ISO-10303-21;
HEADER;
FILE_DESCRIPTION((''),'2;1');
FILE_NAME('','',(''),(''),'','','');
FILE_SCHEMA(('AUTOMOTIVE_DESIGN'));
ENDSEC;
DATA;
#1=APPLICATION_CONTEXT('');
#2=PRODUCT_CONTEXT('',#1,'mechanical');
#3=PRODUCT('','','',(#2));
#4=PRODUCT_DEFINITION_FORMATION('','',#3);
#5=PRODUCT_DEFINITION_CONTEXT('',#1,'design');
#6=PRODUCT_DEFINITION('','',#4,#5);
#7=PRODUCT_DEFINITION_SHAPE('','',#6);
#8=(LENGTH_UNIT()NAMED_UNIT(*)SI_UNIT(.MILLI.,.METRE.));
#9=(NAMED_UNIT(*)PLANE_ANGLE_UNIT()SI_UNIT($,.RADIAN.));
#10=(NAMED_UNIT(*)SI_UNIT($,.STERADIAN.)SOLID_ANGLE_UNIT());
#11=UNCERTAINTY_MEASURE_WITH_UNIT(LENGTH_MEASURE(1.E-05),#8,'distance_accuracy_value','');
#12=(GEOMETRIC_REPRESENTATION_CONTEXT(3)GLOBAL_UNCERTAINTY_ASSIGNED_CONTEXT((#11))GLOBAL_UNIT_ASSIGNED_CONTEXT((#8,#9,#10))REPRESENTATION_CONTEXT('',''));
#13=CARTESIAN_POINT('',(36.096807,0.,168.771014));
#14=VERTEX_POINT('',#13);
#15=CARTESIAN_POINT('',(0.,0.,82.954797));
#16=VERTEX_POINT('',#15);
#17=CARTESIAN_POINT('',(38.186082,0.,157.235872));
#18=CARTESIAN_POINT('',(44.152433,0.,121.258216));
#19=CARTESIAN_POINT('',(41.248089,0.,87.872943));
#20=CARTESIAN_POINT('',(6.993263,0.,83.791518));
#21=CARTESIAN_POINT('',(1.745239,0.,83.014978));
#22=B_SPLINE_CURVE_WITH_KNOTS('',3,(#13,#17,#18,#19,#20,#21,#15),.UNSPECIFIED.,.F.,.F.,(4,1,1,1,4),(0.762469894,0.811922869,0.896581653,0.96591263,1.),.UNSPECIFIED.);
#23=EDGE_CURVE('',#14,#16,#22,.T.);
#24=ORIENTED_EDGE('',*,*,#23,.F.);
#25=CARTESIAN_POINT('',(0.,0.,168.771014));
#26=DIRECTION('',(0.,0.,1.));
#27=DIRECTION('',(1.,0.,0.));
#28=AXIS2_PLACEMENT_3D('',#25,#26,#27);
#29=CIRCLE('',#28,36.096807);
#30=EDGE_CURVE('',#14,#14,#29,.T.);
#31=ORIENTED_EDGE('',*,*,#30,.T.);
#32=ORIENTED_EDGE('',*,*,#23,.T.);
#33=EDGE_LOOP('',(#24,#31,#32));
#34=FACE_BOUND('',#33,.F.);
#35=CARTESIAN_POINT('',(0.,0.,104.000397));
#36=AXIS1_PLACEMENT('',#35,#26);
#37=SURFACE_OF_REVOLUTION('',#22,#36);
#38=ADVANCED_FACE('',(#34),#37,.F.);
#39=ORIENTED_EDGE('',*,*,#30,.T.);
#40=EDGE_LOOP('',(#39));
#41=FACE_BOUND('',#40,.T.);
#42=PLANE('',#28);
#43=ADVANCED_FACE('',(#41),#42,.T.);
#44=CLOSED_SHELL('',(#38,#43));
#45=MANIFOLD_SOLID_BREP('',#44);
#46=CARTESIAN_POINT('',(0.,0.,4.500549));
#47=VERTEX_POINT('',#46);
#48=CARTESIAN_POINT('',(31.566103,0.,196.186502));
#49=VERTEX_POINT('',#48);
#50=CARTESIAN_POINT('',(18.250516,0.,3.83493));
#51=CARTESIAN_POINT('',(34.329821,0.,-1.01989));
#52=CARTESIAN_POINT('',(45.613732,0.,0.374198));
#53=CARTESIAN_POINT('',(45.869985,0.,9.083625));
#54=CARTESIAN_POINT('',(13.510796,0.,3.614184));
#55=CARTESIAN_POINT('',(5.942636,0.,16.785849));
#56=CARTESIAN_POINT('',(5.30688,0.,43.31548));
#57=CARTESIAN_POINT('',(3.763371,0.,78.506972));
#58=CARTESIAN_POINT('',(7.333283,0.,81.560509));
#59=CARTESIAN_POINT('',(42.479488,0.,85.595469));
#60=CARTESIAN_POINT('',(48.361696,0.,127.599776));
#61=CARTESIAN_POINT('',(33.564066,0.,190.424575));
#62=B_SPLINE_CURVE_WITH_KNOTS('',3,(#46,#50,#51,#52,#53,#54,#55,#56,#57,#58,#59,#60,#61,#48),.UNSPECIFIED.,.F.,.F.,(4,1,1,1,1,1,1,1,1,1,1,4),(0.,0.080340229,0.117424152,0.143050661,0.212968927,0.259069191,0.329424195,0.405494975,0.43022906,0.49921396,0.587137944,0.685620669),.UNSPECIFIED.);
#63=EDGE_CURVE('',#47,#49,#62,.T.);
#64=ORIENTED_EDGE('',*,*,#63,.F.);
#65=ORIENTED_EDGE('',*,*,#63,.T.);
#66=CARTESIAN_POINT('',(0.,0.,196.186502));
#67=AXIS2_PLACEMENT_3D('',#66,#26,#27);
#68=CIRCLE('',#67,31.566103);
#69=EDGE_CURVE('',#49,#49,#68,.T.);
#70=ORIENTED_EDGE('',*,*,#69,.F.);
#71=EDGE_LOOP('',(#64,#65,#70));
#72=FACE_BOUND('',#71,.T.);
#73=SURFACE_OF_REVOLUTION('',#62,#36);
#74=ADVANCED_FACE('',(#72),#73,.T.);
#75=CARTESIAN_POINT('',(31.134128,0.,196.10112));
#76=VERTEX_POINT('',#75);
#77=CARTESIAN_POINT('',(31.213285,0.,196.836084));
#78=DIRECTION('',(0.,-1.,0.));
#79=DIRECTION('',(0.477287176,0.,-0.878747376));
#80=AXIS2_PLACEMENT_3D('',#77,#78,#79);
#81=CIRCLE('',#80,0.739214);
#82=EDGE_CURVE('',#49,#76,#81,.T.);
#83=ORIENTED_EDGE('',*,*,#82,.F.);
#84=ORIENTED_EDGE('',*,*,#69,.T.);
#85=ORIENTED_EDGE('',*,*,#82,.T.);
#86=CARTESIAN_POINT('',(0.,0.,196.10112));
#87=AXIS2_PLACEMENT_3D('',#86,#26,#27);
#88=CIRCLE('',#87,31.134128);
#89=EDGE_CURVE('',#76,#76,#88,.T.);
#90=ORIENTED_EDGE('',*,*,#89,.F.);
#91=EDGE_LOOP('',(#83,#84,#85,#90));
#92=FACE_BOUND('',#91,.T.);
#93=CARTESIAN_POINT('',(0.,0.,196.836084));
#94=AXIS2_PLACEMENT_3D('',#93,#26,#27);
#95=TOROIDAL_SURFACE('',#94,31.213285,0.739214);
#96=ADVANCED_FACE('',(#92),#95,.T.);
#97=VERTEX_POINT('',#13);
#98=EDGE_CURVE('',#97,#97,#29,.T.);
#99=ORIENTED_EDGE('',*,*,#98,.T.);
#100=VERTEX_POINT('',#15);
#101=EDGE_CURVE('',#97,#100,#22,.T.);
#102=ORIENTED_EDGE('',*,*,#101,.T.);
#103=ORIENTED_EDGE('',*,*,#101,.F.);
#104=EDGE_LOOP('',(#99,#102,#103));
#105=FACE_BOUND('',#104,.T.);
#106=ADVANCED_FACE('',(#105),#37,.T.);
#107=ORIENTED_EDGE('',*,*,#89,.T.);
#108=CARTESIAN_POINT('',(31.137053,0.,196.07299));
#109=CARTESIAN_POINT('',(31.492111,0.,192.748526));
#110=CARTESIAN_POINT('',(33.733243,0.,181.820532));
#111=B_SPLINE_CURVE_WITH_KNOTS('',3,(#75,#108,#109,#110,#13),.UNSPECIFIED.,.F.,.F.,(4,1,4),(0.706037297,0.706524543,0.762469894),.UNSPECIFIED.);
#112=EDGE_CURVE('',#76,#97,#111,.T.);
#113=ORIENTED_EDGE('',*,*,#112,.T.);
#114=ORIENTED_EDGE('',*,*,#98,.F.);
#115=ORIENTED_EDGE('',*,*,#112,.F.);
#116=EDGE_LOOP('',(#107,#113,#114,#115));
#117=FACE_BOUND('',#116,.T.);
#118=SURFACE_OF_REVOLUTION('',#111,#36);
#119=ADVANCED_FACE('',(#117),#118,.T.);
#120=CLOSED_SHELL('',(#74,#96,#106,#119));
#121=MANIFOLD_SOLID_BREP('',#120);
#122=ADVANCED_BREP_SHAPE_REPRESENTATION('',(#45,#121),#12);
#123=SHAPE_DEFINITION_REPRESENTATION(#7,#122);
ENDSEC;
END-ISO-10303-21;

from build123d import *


with BuildPart() as f1:
    # F0 (on Front) → F1 (revolve)
    with BuildSketch(Plane.XZ):
        with BuildLine():
            Line((0, 82.9547974361), (0, 4.5005489468))
            add(Edge.make_bspline(
                [(0, 4.5005489468), (18.2505162347, 3.834930338), (34.3298208435, -1.0198899315), (45.6137322951, 0.3741983137), (45.869984667, 9.0836251174), (13.51079595, 3.614184281), (5.9426358502, 16.785848861), (5.3068801774, 43.3154798774), (3.7633712803, 78.5069717888), (7.333282914, 81.5605086481), (42.4794878758, 85.5954689569), (48.3616963183, 127.5997756572), (33.5640664678, 190.4245748965), (31.5661028946, 196.1865015243)],
                knots=[0, 0, 0, 0, 0.0803402286, 0.1174241523, 0.1430506609, 0.2129689271, 0.2590691911, 0.3294241952, 0.4054949752, 0.4302290595, 0.4992139601, 0.5871379444, 0.6856206692, 0.6856206692, 0.6856206692, 0.6856206692], degree=3))
            add(Edge.make_bspline(
                [(31.5661028946, 196.1865015243), (31.4094921747, 196.6381511386), (31.0898659276, 197.3869277296), (31.0579286187, 196.8341686094), (31.1341284742, 196.1011202354)],
                knots=[0.6856206692, 0.6856206692, 0.6856206692, 0.6856206692, 0.6933402546, 0.706037297, 0.706037297, 0.706037297, 0.706037297], degree=3))
            add(Edge.make_bspline(
                [(31.1341284742, 196.1011202354), (31.1370526235, 196.0729896976), (31.4921105294, 192.7485255774), (33.7332429133, 181.8205323436), (36.0968065343, 168.7710136175)],
                knots=[0.706037297, 0.706037297, 0.706037297, 0.706037297, 0.7065245426, 0.7624698935, 0.7624698935, 0.7624698935, 0.7624698935], degree=3))
            add(Edge.make_bspline(
                [(36.0968065343, 168.7710136175), (38.1860820867, 157.2358722727), (44.152433487, 121.2582163059), (41.2480892444, 87.8729431723), (6.9932630597, 83.791517948), (1.7452394882, 83.0149781289), (0, 82.9547974361)],
                knots=[0.7624698935, 0.7624698935, 0.7624698935, 0.7624698935, 0.811922869, 0.8965816529, 0.9659126303, 1, 1, 1, 1], degree=3))
        make_face()
        with BuildLine():
            add(Edge.make_bspline(
                [(31.5661028946, 196.1865015243), (31.4094921747, 196.6381511386), (31.0898659276, 197.3869277296), (31.0579286187, 196.8341686094), (31.1341284742, 196.1011202354)],
                knots=[0.6856206692, 0.6856206692, 0.6856206692, 0.6856206692, 0.6933402546, 0.706037297, 0.706037297, 0.706037297, 0.706037297], degree=3))
            ThreePointArc((31.5661028946, 196.1865015243), (31.0699500693, 197.5612687414), (31.1341284742, 196.1011202354))
        make_face()
    revolve(axis=Axis((0, 0, 104.0003970265), (0, 0, 1)))


with BuildPart() as f2:
    # F0 (on Front) → F2 (revolve)
    with BuildSketch(Plane.XZ):
        with BuildLine():
            Line((0, 168.7710136175), (0, 82.9547974361))
            add(Edge.make_bspline(
                [(36.0968065343, 168.7710136175), (38.1860820867, 157.2358722727), (44.152433487, 121.2582163059), (41.2480892444, 87.8729431723), (6.9932630597, 83.791517948), (1.7452394882, 83.0149781289), (0, 82.9547974361)],
                knots=[0.7624698935, 0.7624698935, 0.7624698935, 0.7624698935, 0.811922869, 0.8965816529, 0.9659126303, 1, 1, 1, 1], degree=3))
            Line((36.0968065343, 168.7710136175), (0, 168.7710136175))
        make_face()
    revolve(axis=Axis((0, 0, 104.0003970265), (0, 0, 1)))


solid = Compound([f1.part, f2.part])
